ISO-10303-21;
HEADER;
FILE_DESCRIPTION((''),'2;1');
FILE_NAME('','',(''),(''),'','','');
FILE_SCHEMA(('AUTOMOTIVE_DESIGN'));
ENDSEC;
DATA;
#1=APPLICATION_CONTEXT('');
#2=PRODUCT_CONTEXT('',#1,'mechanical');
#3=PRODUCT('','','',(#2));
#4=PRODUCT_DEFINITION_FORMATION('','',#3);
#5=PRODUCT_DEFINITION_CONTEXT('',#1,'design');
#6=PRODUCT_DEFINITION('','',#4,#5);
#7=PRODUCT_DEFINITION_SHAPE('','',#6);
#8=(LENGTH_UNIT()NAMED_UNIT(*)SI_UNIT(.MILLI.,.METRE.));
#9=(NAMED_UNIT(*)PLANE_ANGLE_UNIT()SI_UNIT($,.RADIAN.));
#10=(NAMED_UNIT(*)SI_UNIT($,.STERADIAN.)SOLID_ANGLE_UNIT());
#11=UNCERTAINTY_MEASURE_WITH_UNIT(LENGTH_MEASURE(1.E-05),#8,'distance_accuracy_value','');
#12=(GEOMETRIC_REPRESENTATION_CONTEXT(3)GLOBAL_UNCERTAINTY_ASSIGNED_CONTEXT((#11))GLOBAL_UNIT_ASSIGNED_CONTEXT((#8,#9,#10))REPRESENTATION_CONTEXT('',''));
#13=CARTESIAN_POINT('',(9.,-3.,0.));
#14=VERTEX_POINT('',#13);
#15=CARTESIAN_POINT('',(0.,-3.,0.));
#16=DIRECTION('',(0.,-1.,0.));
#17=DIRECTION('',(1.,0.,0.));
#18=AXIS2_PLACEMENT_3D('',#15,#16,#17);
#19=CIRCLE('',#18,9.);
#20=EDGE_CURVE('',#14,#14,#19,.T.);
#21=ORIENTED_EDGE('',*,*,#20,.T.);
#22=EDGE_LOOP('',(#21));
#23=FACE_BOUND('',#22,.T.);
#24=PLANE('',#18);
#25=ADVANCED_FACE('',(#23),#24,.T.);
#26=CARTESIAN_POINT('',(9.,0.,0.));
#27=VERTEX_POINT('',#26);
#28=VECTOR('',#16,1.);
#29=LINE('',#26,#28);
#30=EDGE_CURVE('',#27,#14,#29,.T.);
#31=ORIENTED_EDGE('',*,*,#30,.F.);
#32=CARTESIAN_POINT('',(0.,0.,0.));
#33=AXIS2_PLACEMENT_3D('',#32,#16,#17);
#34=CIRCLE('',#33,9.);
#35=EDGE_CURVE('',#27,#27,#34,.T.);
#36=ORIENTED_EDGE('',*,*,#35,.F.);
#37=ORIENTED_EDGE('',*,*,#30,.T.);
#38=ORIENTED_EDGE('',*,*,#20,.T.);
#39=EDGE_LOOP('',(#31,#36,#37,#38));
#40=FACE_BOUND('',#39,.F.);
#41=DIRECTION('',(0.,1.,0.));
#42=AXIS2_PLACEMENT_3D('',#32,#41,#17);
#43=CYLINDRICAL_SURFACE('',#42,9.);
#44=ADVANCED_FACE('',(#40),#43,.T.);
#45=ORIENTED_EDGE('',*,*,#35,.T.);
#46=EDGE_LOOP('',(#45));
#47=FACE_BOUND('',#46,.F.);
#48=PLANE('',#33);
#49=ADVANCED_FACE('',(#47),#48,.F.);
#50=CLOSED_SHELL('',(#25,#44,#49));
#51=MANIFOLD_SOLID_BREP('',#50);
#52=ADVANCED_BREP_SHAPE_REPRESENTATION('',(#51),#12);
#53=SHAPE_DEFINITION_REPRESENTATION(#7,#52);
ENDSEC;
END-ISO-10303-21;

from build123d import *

# Parameters (mm, degrees)
F0_R     = 9
F0_R_2   = 7
F1_DEPTH = 3


# Not quite as in the source:
# - the program builds the solid bodies; features that only make, move or delete a surface that nothing else refers to are left out


with BuildPart() as f1:
    # F0 (on Front) → F1 (new body)
    with BuildSketch(Plane.XZ):
        Circle(F0_R)
        Circle(F0_R_2, mode=Mode.SUBTRACT)
        Circle(F0_R_2)
    extrude(amount=F1_DEPTH)


solid = f1.part
